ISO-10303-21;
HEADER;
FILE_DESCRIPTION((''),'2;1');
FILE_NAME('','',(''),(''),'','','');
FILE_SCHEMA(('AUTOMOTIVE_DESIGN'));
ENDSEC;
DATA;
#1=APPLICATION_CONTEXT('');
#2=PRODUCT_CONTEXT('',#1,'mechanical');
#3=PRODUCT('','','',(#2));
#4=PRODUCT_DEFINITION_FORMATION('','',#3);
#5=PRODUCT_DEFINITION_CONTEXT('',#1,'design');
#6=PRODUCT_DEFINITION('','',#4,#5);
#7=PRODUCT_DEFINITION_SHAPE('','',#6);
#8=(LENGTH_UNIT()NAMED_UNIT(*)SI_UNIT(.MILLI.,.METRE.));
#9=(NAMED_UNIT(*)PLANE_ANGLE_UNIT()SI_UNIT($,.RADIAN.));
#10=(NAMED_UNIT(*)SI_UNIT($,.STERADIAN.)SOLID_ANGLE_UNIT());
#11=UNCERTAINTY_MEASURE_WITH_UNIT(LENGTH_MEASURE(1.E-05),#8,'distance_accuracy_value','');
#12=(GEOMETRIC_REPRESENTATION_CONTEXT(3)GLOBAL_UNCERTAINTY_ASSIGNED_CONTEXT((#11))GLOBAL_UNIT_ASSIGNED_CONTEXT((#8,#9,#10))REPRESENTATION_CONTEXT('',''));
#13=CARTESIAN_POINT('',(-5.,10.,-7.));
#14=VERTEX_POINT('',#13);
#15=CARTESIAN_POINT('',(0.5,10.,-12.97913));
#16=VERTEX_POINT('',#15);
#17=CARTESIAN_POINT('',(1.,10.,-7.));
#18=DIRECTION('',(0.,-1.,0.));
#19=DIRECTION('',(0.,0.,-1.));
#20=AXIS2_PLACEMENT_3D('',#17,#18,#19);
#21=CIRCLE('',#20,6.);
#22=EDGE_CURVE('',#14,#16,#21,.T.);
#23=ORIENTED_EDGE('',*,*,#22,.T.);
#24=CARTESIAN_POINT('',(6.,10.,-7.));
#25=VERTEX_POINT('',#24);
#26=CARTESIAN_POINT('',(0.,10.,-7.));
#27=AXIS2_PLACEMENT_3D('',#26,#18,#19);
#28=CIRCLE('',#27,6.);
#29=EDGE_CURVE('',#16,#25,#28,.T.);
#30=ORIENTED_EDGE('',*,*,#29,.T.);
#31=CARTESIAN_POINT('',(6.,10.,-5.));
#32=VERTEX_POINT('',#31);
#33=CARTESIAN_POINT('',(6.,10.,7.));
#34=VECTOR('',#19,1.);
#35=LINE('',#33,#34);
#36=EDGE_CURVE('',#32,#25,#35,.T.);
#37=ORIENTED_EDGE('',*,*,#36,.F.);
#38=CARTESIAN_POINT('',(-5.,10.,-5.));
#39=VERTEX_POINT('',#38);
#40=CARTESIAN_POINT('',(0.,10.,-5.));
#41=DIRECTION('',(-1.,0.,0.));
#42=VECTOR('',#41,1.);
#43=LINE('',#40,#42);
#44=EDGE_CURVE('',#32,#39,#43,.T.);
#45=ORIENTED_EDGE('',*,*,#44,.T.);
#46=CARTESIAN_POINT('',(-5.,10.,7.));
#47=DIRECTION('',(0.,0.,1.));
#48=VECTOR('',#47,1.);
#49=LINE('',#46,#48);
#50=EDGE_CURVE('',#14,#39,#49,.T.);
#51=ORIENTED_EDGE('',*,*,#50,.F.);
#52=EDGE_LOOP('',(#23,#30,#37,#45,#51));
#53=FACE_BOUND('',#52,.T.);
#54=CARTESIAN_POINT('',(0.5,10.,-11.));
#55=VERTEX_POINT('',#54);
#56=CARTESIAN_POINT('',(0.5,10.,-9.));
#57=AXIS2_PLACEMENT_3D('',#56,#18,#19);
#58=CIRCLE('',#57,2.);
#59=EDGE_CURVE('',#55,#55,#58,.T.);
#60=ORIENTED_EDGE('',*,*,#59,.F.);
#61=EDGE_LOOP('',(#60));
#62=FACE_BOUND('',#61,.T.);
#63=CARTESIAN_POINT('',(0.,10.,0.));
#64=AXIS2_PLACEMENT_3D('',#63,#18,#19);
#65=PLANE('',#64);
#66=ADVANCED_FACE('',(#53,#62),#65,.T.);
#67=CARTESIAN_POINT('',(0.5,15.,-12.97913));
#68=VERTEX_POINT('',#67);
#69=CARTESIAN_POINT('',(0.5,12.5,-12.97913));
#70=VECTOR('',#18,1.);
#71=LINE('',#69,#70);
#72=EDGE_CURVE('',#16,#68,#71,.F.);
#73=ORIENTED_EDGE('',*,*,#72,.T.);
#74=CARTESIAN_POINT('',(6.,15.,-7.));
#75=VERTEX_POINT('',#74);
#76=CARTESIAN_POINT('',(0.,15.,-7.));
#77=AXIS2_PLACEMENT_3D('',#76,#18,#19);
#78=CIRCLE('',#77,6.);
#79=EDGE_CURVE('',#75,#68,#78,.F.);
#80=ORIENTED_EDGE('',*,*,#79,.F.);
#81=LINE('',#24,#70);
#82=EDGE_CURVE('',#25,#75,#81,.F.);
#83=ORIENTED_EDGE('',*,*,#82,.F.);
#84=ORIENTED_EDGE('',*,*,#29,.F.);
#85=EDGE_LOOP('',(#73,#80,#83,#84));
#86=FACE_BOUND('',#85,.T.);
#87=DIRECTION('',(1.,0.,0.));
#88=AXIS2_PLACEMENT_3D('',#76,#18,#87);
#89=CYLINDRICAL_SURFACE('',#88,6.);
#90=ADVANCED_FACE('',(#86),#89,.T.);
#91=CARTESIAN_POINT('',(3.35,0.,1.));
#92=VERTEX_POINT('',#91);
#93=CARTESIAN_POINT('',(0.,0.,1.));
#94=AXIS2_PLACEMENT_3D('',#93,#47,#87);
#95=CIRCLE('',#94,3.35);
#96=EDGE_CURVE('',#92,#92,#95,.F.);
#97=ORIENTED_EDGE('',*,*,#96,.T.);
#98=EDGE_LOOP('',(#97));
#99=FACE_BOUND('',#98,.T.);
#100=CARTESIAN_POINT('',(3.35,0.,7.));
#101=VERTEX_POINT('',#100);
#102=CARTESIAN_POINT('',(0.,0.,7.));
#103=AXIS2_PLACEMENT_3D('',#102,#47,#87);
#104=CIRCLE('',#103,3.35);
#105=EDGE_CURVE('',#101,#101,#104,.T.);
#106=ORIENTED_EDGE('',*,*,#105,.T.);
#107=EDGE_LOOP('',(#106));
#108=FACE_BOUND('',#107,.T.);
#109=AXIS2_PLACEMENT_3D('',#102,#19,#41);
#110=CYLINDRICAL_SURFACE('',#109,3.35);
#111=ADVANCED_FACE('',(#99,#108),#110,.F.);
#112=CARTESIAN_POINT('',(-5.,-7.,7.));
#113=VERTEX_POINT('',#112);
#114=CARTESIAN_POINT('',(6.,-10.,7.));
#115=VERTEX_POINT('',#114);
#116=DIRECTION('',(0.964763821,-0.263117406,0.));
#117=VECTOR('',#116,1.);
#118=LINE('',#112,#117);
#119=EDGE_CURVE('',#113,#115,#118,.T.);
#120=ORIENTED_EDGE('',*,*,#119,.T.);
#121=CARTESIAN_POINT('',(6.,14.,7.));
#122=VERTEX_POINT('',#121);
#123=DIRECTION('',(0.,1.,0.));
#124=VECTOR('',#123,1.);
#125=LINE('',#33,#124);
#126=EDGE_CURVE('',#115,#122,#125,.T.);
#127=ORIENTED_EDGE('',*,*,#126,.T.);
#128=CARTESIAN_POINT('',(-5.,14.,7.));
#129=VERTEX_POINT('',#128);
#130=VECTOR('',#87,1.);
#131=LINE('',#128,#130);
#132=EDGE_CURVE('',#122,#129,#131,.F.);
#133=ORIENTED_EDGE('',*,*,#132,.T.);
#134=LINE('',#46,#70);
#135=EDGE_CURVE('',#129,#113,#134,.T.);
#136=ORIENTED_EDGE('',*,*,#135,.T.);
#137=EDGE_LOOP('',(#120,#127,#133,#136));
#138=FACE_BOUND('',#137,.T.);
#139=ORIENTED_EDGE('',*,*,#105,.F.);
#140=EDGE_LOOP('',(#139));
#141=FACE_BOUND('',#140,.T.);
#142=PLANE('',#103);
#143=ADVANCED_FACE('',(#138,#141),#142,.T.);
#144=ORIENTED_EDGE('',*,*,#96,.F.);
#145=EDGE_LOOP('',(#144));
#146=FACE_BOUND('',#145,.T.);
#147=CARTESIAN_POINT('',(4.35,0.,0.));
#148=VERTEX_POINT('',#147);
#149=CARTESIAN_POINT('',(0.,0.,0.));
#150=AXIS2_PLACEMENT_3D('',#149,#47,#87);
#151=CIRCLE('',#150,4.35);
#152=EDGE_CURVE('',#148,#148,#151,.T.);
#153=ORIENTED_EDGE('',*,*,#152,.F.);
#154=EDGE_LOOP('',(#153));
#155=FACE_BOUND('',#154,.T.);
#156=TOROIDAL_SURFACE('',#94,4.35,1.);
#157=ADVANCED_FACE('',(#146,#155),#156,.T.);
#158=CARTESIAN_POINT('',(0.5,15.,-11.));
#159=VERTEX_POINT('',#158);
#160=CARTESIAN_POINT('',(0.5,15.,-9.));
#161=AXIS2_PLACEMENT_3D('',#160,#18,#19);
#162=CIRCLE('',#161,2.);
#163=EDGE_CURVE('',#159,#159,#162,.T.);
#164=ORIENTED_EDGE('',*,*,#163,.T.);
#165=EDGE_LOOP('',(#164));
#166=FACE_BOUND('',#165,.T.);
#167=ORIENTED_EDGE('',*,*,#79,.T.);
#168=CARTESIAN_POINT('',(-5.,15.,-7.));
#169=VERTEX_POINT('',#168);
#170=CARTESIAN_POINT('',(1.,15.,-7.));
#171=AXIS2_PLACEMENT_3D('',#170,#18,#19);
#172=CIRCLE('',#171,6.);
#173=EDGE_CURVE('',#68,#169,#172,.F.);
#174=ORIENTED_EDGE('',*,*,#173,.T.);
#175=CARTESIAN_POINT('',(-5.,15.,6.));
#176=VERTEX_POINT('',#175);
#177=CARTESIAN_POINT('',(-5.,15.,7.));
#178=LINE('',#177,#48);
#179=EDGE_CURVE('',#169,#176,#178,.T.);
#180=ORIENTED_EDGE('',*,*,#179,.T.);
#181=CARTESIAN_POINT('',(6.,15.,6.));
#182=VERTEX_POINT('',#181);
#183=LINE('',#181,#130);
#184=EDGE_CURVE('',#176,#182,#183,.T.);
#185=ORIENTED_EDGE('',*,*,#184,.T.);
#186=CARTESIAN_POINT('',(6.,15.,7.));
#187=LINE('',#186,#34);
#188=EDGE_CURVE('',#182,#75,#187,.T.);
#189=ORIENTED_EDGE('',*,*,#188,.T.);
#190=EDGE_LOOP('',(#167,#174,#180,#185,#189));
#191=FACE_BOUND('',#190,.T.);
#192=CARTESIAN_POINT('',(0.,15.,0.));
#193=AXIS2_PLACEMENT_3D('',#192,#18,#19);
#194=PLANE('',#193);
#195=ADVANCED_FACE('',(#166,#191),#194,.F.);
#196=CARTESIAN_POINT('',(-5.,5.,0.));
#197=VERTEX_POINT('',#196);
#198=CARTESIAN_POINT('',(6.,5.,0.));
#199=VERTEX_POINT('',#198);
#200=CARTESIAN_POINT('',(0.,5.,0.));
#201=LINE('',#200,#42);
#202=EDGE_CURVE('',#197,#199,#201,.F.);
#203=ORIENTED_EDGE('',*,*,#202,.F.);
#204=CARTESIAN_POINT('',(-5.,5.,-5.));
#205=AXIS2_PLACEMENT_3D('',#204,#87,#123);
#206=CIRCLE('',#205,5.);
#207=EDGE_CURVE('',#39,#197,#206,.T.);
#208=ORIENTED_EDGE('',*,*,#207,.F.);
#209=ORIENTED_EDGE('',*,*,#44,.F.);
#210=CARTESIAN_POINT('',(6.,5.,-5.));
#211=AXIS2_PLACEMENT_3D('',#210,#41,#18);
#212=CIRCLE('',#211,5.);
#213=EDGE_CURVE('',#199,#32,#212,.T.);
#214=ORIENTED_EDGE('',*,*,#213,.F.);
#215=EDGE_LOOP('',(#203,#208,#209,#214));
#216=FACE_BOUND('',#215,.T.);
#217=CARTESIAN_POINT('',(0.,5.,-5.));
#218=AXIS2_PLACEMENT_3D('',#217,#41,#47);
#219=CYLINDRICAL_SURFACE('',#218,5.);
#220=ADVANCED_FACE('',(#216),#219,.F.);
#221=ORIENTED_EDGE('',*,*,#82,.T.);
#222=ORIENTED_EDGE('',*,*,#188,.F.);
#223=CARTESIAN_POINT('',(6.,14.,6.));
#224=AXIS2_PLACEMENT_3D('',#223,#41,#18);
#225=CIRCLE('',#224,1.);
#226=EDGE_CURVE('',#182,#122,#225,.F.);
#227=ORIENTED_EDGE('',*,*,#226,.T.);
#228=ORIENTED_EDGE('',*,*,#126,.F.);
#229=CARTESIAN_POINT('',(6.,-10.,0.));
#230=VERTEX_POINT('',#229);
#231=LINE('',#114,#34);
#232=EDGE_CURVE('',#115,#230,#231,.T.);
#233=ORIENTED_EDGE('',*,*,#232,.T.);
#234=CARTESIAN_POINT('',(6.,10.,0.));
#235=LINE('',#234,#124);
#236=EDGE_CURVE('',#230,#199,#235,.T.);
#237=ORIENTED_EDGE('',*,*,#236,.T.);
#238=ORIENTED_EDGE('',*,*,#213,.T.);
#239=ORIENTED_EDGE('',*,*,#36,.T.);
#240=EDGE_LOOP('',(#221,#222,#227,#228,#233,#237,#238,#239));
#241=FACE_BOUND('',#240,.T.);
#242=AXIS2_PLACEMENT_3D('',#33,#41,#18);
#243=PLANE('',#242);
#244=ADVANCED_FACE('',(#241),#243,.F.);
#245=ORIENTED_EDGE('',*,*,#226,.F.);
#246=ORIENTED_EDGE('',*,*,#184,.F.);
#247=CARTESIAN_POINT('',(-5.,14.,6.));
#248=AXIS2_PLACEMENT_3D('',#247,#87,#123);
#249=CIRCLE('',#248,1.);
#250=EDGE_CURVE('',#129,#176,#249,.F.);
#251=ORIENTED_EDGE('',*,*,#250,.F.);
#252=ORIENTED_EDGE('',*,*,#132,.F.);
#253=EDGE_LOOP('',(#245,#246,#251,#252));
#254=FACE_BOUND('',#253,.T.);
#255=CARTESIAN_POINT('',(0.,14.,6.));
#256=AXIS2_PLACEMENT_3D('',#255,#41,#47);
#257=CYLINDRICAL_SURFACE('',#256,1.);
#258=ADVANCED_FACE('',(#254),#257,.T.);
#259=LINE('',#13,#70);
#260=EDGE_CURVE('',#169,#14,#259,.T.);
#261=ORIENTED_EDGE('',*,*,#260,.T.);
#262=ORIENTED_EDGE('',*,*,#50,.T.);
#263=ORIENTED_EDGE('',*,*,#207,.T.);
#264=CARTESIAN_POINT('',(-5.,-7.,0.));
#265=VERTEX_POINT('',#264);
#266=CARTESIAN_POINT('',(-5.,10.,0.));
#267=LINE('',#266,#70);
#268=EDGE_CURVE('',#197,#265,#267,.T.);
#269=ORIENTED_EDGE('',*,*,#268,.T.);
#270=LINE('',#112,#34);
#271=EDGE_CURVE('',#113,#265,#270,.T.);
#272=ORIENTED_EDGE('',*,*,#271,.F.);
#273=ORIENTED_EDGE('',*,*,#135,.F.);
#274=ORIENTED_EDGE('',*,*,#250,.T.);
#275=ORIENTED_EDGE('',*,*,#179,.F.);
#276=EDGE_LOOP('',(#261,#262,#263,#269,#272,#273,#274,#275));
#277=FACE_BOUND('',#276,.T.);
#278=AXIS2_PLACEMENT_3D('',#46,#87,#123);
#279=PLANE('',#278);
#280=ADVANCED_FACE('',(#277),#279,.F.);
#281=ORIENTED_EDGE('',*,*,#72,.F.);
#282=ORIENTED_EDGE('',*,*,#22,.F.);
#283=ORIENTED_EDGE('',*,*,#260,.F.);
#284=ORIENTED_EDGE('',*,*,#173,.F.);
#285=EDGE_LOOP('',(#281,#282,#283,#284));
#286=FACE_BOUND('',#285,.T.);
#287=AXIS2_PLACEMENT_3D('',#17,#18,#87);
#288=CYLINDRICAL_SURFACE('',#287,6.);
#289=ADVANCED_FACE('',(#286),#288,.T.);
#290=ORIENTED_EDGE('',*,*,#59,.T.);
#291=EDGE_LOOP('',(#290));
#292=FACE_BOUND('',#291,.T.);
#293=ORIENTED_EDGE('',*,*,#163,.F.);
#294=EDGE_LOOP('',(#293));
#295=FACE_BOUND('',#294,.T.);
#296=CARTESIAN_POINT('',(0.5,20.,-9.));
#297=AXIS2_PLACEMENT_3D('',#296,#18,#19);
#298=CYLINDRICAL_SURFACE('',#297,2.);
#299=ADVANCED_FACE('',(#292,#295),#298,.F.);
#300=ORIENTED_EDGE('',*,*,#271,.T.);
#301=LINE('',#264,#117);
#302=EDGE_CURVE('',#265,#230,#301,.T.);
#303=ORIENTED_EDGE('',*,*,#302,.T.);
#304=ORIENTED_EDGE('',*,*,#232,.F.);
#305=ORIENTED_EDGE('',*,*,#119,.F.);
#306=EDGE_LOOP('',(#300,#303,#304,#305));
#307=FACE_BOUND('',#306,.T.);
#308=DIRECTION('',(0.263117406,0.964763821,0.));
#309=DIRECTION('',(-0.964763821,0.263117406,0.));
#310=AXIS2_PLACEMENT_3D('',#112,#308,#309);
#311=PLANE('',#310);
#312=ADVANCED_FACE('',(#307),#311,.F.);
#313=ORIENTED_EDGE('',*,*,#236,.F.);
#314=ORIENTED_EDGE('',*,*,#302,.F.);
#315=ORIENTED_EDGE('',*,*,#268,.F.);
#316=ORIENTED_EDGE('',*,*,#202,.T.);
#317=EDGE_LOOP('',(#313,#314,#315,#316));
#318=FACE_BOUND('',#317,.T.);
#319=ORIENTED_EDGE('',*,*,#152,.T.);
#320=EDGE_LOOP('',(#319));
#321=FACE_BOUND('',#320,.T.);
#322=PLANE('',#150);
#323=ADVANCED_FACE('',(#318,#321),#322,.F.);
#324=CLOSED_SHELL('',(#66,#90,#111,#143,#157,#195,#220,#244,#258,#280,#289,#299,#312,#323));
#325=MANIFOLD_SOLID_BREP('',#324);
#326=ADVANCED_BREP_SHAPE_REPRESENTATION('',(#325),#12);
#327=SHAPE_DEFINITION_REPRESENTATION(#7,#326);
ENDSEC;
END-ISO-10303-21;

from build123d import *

# Parameters (mm, degrees)
SKETCH_1_R          = 3.35
EXTRUDE_1_DEPTH     = 7
SKETCH_2_W          = 11
SKETCH_2_H          = 20
EXTRUDE_2_DEPTH     = 5
FILLET_1_R          = 5
FILLET_2_R          = 1
FILLET_4_R          = 1
FILLET_11_R         = 6
SKETCH_3_R          = 2
CUT_EXTRUDE_2_DEPTH = 10


with BuildPart() as part:
    # Эскиз1 → Бобышка-Вытянуть1 (new body)
    with BuildSketch(Plane.XY):
        Polygon((-5, 10), (6, 10), (6, -10), (-5, -7), align=None)
        Circle(SKETCH_1_R, mode=Mode.SUBTRACT)
    extrude(amount=EXTRUDE_1_DEPTH)

    # Эскиз2 → Бобышка-Вытянуть2 (add)
    with BuildSketch(Plane(origin=(0, 10, 0), x_dir=(1, 0, 0), z_dir=(0, 1, 0))):
        with Locations((0.5, 3)):
            Rectangle(SKETCH_2_W, SKETCH_2_H)
    extrude(amount=EXTRUDE_2_DEPTH)

    # Скругление1
    fillet_1_edges = [part.edges().sort_by_distance(p)[0] for p in [
        (0.5, 10, 0),
    ]]
    fillet(fillet_1_edges, radius=FILLET_1_R)

    # Скругление2
    fillet_2_edges = [part.edges().sort_by_distance(p)[0] for p in [
        (-3.35, 0, 0),
    ]]
    fillet(fillet_2_edges, radius=FILLET_2_R)

    # Скругление4
    fillet_4_edges = [part.edges().sort_by_distance(p)[0] for p in [
        (0.5, 15, 7),
    ]]
    fillet(fillet_4_edges, radius=FILLET_4_R)

    # Скругление11
    # the kernel refuses this fillet: 6 mm, written as the material it takes off along each edge
    with BuildSketch(Plane(origin=(6, -5, -13), x_dir=(0, 0, 1), z_dir=(0, 1, 0)), Plane(origin=(-5, -5, -13), x_dir=(1, 0, 0), z_dir=(0, 1, 0))) as fillet_11_piece_1:
        with BuildLine():
            CenterArc((FILLET_11_R, -FILLET_11_R), FILLET_11_R, 90, 90)
            Line((0, -FILLET_11_R), (0, 0))
            Line((0, 0), (FILLET_11_R, 0))
        make_face()
    extrude(amount=35, mode=Mode.SUBTRACT)

    # Эскиз3 → Вырез-Вытянуть2 (cut)
    with BuildSketch(Plane.XZ.offset(-10)):
        with Locations(Location((0.5, -9, 0), (0, 0, 270))):
            Circle(SKETCH_3_R)
    extrude(amount=-CUT_EXTRUDE_2_DEPTH, mode=Mode.SUBTRACT)


solid = part.part
